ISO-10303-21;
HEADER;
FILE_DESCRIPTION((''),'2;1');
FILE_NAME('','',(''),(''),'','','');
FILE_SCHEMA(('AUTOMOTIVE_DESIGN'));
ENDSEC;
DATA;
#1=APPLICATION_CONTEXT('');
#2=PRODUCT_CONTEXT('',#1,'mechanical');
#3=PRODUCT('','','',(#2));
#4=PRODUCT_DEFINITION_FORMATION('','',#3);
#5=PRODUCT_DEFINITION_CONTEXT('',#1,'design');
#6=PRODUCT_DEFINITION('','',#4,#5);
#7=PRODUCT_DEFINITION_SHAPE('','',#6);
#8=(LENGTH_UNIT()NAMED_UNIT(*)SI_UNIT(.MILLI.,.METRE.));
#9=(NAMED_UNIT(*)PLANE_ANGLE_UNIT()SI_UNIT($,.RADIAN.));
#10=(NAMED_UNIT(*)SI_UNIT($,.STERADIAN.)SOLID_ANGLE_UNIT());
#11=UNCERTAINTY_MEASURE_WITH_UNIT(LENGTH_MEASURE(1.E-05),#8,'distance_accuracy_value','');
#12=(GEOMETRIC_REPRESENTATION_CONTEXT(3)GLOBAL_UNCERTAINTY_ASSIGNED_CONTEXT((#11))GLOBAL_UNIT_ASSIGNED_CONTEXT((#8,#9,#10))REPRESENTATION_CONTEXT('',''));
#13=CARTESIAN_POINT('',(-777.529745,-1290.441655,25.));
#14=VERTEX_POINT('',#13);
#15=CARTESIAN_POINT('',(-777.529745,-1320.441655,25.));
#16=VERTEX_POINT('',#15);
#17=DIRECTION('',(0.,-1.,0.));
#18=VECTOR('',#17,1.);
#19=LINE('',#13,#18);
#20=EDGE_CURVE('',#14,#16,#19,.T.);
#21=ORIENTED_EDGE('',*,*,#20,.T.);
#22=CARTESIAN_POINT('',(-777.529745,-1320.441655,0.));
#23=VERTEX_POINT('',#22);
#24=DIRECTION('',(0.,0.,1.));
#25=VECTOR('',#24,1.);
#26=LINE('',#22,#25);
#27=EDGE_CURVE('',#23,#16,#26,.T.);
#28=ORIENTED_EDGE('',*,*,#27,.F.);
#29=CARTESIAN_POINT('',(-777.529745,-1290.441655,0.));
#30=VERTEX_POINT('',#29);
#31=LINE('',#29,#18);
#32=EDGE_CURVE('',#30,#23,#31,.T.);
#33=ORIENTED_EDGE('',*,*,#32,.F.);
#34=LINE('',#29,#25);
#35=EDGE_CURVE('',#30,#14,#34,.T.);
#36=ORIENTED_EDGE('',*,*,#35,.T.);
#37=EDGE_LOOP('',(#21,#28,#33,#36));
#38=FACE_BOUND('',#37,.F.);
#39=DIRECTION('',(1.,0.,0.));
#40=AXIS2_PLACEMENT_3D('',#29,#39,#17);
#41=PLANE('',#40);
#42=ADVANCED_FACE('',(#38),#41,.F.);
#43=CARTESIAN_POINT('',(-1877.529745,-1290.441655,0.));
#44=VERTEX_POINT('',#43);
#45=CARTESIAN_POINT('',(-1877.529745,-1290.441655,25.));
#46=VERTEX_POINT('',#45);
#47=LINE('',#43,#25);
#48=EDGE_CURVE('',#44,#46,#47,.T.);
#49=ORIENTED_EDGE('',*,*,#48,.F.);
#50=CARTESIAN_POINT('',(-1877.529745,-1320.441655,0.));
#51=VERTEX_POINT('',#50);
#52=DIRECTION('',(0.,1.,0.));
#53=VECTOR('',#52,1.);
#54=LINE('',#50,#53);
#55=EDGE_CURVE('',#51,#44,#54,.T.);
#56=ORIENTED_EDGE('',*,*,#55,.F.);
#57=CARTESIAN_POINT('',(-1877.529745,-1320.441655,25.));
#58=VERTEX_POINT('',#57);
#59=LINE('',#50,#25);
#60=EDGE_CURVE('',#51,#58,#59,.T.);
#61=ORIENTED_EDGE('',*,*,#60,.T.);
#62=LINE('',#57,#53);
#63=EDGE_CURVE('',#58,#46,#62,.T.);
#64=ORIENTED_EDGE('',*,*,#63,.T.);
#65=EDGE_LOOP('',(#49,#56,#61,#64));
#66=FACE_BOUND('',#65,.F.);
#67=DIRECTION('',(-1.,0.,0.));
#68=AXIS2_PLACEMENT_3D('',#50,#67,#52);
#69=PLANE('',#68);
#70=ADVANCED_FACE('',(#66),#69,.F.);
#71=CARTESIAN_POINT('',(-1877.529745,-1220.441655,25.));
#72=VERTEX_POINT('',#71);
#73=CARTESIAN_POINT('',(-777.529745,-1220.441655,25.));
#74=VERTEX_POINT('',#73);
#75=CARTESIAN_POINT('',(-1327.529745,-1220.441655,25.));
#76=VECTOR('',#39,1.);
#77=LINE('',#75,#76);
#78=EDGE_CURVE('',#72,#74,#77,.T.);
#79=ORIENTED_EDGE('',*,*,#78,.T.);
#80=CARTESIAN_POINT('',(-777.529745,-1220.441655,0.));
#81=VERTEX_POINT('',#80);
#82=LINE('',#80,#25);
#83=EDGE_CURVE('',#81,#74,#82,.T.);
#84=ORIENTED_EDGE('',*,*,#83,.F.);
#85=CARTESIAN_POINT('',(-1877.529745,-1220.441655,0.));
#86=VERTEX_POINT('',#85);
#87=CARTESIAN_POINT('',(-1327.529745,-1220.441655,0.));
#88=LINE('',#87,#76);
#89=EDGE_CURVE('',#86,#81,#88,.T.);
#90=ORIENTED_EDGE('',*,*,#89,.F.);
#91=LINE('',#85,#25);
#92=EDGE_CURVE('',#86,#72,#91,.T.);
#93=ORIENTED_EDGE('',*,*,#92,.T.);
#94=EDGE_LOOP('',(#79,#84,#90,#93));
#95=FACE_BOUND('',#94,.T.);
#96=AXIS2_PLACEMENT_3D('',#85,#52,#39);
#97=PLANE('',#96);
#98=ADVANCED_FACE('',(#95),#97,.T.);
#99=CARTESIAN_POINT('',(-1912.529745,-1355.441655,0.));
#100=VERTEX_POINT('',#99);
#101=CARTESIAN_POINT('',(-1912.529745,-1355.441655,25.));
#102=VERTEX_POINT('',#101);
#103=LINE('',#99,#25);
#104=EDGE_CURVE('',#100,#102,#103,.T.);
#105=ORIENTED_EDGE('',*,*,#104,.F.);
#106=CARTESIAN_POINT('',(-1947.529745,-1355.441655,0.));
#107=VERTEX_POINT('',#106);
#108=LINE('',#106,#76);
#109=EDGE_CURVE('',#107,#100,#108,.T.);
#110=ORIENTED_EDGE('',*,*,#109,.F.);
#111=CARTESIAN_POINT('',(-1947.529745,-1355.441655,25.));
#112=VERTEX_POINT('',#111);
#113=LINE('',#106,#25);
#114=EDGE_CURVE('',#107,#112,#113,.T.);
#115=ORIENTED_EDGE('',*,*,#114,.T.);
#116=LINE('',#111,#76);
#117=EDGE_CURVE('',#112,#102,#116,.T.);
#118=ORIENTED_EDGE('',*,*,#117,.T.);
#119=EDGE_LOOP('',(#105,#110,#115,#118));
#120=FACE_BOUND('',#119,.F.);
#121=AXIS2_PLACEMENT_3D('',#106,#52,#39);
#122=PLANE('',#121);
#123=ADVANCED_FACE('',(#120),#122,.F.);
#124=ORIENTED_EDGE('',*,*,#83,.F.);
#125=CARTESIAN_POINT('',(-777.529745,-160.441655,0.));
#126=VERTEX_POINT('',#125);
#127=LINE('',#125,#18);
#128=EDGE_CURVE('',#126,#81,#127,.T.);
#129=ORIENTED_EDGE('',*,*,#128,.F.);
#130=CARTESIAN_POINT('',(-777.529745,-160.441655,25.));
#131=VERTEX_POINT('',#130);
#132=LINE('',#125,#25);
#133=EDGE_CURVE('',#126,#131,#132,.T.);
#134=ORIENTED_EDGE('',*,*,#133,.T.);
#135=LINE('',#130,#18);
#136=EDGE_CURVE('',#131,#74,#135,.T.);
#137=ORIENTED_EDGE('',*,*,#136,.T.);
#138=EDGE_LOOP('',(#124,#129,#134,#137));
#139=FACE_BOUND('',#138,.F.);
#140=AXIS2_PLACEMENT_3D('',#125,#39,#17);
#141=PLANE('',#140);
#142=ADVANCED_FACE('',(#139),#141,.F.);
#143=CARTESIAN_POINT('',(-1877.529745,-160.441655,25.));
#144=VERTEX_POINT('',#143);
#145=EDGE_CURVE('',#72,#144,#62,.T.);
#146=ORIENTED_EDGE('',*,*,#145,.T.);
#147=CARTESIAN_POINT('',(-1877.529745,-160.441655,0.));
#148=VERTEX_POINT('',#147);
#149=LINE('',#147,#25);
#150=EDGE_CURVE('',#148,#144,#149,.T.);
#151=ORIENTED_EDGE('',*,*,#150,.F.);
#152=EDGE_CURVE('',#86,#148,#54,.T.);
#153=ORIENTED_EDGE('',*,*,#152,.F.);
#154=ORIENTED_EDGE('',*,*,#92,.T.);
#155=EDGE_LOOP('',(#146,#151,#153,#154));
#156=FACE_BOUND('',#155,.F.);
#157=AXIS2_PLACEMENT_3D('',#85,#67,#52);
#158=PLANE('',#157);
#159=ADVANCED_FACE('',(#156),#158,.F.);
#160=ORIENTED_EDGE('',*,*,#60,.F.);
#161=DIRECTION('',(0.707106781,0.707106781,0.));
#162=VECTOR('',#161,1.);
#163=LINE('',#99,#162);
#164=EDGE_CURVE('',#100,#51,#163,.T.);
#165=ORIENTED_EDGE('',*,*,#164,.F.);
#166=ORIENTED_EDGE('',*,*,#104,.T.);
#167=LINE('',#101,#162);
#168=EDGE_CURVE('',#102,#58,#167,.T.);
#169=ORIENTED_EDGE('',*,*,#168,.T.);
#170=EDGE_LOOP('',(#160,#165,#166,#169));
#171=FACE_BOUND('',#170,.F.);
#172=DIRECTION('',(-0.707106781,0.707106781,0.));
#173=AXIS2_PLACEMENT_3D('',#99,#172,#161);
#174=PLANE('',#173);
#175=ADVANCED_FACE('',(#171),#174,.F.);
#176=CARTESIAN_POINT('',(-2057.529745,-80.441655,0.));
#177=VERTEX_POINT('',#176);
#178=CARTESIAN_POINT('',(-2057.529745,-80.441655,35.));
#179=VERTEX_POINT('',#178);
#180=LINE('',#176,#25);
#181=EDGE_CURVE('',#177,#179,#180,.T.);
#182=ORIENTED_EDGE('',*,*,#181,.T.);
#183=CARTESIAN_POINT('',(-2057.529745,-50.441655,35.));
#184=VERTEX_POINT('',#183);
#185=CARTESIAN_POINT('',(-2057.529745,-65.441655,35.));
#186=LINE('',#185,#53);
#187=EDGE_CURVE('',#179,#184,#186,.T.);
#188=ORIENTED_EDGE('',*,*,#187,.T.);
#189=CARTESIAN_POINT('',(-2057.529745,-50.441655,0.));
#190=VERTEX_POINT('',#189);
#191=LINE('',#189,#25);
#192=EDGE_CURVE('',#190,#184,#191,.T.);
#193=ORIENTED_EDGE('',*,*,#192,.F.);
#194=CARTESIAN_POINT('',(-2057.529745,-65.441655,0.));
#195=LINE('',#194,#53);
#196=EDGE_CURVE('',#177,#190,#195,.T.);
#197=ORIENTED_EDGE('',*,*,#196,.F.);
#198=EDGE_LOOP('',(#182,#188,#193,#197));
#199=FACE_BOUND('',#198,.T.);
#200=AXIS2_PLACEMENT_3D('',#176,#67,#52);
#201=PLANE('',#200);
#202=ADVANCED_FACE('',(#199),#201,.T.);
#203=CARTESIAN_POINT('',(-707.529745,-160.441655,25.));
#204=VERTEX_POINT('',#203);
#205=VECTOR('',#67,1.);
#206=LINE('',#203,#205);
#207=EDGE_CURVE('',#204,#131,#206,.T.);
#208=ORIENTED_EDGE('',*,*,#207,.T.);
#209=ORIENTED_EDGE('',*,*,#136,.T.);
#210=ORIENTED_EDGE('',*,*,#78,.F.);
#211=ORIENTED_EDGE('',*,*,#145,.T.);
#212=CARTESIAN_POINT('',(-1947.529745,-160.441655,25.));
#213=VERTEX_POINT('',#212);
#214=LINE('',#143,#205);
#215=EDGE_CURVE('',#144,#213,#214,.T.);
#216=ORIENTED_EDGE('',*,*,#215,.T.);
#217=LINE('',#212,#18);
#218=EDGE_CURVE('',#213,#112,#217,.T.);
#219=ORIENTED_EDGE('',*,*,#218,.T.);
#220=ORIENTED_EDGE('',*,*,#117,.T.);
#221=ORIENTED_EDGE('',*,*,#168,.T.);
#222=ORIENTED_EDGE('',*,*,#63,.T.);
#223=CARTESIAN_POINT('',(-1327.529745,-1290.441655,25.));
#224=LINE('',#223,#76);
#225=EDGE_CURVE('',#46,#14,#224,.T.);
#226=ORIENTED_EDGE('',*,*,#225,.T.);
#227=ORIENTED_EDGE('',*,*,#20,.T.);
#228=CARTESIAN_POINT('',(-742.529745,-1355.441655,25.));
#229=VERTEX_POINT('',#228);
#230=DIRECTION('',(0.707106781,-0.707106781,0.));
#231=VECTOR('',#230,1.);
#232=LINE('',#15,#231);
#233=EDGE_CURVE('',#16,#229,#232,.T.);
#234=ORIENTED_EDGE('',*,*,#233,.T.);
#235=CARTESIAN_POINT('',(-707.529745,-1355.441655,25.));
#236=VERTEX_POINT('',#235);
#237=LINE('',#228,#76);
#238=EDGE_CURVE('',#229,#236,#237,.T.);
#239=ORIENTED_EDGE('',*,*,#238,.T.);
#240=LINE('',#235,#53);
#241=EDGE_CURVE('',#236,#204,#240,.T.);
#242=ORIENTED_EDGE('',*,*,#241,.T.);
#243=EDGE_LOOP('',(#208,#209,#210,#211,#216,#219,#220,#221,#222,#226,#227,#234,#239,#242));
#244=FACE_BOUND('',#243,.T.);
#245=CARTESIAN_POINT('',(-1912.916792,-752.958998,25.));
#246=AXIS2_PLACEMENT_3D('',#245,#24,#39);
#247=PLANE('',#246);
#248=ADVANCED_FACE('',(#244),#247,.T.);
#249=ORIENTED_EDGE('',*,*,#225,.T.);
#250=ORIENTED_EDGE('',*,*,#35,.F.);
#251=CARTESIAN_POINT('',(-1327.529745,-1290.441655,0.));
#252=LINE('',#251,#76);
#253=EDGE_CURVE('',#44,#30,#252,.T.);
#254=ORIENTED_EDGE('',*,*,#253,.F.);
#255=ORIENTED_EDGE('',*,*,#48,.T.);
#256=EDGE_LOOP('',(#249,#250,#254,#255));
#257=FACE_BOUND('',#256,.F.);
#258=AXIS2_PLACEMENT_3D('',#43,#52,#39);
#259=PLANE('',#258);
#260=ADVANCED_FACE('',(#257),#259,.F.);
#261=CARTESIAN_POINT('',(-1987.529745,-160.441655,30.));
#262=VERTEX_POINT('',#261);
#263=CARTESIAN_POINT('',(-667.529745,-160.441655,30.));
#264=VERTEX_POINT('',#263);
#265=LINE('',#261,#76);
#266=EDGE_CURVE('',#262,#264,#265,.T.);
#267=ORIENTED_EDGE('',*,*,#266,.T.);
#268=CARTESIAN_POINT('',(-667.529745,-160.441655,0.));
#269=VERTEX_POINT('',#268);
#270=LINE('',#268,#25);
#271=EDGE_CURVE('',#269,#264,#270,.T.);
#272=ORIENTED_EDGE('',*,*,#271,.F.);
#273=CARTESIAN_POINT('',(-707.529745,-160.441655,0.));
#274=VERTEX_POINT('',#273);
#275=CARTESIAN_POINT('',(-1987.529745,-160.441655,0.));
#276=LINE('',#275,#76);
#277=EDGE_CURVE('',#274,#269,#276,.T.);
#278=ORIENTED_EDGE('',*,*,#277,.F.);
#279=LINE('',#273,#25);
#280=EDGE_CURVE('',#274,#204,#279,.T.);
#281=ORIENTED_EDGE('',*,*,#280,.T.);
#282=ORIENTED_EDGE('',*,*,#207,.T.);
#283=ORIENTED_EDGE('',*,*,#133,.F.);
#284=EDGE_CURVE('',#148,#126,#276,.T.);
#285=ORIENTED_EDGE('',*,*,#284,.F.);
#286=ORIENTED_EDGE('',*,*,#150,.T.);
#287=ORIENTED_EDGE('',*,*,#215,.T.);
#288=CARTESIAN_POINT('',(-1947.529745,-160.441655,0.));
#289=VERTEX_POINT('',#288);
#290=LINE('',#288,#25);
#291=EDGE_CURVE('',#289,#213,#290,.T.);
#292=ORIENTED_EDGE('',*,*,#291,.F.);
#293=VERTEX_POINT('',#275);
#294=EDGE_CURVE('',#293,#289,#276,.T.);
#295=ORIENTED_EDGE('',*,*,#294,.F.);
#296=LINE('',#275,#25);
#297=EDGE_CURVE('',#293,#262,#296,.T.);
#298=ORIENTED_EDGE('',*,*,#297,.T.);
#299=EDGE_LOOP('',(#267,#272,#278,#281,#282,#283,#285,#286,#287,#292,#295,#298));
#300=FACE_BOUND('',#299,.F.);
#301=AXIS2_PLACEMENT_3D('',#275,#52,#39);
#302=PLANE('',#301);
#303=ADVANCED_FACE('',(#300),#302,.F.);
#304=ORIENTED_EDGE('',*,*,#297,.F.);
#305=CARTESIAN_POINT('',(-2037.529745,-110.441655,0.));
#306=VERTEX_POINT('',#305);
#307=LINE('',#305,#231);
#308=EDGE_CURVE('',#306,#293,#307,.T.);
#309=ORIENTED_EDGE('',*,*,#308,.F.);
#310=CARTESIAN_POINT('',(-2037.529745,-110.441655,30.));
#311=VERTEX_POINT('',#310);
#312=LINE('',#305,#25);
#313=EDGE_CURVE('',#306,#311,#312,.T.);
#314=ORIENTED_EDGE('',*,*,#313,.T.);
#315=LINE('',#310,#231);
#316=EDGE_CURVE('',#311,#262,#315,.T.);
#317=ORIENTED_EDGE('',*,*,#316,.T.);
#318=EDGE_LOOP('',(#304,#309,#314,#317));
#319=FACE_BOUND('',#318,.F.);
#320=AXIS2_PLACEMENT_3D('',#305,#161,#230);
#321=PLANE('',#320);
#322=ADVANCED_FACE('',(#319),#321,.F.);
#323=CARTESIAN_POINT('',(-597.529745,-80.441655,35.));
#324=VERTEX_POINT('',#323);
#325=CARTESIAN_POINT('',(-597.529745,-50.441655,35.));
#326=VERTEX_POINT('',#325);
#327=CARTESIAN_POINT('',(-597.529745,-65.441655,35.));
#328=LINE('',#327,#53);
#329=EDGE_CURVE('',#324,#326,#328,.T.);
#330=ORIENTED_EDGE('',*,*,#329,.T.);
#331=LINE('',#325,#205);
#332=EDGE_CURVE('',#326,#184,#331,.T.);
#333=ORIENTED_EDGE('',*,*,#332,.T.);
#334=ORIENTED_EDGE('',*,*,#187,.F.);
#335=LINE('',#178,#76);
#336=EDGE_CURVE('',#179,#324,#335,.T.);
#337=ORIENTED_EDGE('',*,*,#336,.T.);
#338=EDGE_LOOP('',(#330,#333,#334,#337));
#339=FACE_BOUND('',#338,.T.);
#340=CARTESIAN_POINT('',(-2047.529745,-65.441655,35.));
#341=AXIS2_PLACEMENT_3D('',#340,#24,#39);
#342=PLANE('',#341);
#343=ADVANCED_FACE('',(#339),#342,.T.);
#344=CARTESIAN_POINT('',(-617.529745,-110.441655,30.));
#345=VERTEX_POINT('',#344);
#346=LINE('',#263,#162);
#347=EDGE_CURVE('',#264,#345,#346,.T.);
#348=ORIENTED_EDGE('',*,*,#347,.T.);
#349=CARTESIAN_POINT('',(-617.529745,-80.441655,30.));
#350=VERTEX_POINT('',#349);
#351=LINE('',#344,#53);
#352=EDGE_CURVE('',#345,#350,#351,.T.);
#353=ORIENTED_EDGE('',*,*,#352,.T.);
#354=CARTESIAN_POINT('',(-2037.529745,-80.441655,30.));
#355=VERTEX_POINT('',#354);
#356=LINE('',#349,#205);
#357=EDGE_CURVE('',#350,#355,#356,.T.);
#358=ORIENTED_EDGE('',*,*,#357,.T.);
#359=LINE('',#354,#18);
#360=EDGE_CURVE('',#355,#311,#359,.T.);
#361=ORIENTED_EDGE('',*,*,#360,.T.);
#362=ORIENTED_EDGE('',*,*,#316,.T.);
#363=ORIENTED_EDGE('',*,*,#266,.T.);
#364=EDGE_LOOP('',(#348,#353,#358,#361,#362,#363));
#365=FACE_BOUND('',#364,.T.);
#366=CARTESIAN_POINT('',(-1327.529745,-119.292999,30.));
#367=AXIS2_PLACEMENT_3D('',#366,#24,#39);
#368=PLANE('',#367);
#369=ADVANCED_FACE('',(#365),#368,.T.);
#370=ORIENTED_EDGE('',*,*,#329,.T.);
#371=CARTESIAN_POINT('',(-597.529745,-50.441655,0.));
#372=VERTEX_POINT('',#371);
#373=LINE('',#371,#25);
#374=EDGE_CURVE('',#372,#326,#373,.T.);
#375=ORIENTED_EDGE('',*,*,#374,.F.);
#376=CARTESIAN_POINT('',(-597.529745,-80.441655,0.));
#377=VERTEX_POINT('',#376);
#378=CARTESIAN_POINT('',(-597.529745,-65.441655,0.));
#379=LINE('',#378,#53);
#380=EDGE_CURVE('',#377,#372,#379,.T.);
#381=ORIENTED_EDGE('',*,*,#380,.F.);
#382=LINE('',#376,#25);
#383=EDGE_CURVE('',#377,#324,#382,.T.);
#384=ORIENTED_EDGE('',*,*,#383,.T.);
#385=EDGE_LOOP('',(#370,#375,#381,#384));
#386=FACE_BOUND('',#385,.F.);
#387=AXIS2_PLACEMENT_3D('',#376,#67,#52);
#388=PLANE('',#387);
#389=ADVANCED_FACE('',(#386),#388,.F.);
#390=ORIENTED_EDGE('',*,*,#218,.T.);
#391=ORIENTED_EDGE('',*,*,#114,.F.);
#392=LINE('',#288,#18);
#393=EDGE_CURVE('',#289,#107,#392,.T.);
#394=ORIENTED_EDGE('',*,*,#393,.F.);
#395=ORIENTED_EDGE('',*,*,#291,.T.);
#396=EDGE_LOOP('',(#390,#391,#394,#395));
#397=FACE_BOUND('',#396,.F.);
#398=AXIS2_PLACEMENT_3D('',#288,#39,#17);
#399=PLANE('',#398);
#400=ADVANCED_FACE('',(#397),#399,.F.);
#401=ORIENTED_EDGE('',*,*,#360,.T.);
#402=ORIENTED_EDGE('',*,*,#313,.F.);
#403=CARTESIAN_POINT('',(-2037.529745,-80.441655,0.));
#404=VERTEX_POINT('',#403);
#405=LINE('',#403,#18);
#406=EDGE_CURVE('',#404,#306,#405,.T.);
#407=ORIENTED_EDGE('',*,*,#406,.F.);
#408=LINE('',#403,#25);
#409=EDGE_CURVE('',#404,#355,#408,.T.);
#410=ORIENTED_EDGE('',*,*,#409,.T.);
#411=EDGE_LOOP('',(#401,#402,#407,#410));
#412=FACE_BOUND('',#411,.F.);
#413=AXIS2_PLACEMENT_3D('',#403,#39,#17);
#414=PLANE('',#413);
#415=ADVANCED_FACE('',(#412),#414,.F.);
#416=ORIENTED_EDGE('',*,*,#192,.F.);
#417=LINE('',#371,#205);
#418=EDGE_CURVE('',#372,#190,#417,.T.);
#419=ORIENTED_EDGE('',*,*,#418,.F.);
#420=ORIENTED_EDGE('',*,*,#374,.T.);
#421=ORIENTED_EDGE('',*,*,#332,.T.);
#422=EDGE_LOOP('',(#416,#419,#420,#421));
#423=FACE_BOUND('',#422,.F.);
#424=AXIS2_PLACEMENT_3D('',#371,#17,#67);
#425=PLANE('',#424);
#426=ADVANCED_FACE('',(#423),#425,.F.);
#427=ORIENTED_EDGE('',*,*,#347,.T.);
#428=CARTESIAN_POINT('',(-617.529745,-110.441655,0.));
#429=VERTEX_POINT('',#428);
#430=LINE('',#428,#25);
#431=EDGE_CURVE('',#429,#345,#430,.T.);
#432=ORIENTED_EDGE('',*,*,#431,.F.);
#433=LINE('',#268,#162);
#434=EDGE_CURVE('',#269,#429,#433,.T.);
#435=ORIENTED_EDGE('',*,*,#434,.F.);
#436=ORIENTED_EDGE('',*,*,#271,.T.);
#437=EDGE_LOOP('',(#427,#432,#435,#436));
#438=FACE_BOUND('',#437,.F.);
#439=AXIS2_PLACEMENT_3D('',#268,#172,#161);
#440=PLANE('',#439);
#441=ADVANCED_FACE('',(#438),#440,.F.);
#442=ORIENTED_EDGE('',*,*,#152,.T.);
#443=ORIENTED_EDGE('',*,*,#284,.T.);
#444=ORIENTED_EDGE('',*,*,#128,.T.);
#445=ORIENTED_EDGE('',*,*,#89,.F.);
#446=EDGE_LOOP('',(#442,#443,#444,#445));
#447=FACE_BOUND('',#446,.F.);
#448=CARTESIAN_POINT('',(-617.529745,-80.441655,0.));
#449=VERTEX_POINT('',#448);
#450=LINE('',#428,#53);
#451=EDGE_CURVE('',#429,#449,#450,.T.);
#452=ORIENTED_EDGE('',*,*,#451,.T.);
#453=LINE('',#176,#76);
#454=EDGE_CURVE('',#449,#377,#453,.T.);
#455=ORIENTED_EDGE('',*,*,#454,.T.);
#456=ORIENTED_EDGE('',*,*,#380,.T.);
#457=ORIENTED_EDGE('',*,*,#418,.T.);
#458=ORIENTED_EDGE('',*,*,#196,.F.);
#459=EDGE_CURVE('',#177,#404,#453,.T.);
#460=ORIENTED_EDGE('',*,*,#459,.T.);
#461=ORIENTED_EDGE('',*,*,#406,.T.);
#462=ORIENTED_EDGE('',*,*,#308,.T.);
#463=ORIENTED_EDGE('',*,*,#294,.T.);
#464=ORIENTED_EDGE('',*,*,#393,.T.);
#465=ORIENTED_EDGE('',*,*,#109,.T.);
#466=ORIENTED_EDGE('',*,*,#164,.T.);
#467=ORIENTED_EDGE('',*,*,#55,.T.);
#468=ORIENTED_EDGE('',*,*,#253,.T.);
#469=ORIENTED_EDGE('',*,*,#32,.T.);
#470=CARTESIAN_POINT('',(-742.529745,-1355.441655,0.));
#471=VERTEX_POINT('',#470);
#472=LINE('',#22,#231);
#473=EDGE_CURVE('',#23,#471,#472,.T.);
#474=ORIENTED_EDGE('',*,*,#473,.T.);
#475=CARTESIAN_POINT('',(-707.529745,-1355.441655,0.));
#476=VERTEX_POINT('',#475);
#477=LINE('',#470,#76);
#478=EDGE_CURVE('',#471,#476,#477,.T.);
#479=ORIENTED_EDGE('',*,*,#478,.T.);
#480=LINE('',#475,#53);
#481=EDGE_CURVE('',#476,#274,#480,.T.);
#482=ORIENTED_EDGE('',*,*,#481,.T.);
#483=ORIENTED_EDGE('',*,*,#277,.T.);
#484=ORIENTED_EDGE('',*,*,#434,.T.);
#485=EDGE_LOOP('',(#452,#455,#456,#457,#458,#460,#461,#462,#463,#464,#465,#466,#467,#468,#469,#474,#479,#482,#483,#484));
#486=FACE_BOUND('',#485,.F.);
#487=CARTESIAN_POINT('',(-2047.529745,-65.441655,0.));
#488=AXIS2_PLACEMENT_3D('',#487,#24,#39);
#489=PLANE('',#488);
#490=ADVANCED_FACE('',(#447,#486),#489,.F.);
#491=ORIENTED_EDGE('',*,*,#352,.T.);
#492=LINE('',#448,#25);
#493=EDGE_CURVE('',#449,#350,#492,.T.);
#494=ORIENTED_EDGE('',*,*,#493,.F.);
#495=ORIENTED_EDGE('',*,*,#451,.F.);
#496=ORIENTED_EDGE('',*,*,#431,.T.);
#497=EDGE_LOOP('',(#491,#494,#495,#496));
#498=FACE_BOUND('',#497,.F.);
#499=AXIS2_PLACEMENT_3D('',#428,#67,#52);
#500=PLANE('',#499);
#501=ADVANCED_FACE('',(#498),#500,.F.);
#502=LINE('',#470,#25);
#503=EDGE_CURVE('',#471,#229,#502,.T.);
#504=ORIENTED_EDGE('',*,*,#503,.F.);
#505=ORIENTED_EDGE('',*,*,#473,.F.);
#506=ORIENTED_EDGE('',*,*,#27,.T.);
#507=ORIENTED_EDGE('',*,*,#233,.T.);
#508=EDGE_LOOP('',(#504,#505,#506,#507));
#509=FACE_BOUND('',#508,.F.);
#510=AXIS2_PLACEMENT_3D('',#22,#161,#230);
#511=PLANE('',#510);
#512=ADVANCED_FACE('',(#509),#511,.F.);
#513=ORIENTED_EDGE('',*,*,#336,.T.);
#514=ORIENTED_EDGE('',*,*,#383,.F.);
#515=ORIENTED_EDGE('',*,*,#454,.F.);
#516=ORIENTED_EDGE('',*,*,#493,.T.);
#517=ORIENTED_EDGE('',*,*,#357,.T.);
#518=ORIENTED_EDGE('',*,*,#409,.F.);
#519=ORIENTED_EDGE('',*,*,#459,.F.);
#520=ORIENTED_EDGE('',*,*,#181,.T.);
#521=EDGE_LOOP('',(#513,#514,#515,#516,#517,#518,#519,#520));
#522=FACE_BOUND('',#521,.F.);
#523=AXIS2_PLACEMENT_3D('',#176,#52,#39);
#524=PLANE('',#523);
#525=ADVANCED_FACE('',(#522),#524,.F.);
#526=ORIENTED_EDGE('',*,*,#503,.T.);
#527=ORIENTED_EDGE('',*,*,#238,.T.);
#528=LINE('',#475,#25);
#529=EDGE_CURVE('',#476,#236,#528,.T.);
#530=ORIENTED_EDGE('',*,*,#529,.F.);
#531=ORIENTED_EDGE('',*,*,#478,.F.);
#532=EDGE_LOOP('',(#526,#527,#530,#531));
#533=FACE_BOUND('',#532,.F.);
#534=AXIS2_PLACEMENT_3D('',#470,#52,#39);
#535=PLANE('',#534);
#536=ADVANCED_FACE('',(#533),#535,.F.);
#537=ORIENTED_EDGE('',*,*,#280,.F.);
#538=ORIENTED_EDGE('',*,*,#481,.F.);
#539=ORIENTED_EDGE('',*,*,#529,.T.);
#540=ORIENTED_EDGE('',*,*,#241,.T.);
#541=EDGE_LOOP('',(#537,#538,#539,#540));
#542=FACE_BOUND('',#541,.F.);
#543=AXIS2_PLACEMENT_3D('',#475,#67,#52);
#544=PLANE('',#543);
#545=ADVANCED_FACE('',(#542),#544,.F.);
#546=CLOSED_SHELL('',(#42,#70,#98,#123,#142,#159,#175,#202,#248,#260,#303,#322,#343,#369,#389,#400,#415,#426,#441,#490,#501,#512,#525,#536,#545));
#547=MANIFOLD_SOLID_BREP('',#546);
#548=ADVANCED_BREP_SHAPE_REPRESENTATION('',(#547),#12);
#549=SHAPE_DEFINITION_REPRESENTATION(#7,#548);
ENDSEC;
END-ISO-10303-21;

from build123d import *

# Parameters (mm, degrees)
F1_DEPTH = 30
F0_W     = 20
F0_H     = 30
F0_W_2   = 1420
F2_DEPTH = 35
F0_W_3   = 1100
F0_H_2   = 70
F3_DEPTH = 25


with BuildPart() as f1:
    # F0 (on Top) → F1 (new body)
    with BuildSketch(Plane.XY):
        Polygon((-1947.5297451019, -160.4416549206), (-1877.5297451019, -160.4416549206), (-777.5297451019, -160.4416549206), (-707.5297451019, -160.4416549206), (-667.5297451019, -160.4416549206), (-617.5297451019, -110.4416549206), (-617.5297451019, -80.4416549206), (-2037.5297451019, -80.4416549206), (-2037.5297451019, -110.4416549206), (-1987.5297451019, -160.4416549206), align=None)
    extrude(amount=F1_DEPTH)

    # F0 (on Top) → F2 (join)
    with BuildSketch(Plane.XY):
        with Locations((-2047.5297451019, -65.4416549206)):
            Rectangle(F0_W, F0_H)
        with Locations((-1327.5297451019, -65.4416549206)):
            Rectangle(F0_W_2, F0_H)
        with Locations((-607.5297451019, -65.4416549206)):
            Rectangle(F0_W, F0_H)
    extrude(amount=F2_DEPTH)

    # F0 (on Top) → F3 (join)
    with BuildSketch(Plane.XY):
        Polygon((-1877.5297451019, -1220.4416549206), (-1877.5297451019, -160.4416549206), (-1947.5297451019, -160.4416549206), (-1947.5297451019, -1355.4416549206), (-1912.5297451019, -1355.4416549206), (-1877.5297451019, -1320.4416549206), (-1877.5297451019, -1290.4416549206), align=None)
        with Locations((-1327.5297451019, -1255.4416549206)):
            Rectangle(F0_W_3, F0_H_2)
        Polygon((-707.5297451019, -160.4416549206), (-777.5297451019, -160.4416549206), (-777.5297451019, -1220.4416549206), (-777.5297451019, -1290.4416549206), (-777.5297451019, -1320.4416549206), (-742.5297451019, -1355.4416549206), (-707.5297451019, -1355.4416549206), align=None)
    extrude(amount=F3_DEPTH)


solid = f1.part
